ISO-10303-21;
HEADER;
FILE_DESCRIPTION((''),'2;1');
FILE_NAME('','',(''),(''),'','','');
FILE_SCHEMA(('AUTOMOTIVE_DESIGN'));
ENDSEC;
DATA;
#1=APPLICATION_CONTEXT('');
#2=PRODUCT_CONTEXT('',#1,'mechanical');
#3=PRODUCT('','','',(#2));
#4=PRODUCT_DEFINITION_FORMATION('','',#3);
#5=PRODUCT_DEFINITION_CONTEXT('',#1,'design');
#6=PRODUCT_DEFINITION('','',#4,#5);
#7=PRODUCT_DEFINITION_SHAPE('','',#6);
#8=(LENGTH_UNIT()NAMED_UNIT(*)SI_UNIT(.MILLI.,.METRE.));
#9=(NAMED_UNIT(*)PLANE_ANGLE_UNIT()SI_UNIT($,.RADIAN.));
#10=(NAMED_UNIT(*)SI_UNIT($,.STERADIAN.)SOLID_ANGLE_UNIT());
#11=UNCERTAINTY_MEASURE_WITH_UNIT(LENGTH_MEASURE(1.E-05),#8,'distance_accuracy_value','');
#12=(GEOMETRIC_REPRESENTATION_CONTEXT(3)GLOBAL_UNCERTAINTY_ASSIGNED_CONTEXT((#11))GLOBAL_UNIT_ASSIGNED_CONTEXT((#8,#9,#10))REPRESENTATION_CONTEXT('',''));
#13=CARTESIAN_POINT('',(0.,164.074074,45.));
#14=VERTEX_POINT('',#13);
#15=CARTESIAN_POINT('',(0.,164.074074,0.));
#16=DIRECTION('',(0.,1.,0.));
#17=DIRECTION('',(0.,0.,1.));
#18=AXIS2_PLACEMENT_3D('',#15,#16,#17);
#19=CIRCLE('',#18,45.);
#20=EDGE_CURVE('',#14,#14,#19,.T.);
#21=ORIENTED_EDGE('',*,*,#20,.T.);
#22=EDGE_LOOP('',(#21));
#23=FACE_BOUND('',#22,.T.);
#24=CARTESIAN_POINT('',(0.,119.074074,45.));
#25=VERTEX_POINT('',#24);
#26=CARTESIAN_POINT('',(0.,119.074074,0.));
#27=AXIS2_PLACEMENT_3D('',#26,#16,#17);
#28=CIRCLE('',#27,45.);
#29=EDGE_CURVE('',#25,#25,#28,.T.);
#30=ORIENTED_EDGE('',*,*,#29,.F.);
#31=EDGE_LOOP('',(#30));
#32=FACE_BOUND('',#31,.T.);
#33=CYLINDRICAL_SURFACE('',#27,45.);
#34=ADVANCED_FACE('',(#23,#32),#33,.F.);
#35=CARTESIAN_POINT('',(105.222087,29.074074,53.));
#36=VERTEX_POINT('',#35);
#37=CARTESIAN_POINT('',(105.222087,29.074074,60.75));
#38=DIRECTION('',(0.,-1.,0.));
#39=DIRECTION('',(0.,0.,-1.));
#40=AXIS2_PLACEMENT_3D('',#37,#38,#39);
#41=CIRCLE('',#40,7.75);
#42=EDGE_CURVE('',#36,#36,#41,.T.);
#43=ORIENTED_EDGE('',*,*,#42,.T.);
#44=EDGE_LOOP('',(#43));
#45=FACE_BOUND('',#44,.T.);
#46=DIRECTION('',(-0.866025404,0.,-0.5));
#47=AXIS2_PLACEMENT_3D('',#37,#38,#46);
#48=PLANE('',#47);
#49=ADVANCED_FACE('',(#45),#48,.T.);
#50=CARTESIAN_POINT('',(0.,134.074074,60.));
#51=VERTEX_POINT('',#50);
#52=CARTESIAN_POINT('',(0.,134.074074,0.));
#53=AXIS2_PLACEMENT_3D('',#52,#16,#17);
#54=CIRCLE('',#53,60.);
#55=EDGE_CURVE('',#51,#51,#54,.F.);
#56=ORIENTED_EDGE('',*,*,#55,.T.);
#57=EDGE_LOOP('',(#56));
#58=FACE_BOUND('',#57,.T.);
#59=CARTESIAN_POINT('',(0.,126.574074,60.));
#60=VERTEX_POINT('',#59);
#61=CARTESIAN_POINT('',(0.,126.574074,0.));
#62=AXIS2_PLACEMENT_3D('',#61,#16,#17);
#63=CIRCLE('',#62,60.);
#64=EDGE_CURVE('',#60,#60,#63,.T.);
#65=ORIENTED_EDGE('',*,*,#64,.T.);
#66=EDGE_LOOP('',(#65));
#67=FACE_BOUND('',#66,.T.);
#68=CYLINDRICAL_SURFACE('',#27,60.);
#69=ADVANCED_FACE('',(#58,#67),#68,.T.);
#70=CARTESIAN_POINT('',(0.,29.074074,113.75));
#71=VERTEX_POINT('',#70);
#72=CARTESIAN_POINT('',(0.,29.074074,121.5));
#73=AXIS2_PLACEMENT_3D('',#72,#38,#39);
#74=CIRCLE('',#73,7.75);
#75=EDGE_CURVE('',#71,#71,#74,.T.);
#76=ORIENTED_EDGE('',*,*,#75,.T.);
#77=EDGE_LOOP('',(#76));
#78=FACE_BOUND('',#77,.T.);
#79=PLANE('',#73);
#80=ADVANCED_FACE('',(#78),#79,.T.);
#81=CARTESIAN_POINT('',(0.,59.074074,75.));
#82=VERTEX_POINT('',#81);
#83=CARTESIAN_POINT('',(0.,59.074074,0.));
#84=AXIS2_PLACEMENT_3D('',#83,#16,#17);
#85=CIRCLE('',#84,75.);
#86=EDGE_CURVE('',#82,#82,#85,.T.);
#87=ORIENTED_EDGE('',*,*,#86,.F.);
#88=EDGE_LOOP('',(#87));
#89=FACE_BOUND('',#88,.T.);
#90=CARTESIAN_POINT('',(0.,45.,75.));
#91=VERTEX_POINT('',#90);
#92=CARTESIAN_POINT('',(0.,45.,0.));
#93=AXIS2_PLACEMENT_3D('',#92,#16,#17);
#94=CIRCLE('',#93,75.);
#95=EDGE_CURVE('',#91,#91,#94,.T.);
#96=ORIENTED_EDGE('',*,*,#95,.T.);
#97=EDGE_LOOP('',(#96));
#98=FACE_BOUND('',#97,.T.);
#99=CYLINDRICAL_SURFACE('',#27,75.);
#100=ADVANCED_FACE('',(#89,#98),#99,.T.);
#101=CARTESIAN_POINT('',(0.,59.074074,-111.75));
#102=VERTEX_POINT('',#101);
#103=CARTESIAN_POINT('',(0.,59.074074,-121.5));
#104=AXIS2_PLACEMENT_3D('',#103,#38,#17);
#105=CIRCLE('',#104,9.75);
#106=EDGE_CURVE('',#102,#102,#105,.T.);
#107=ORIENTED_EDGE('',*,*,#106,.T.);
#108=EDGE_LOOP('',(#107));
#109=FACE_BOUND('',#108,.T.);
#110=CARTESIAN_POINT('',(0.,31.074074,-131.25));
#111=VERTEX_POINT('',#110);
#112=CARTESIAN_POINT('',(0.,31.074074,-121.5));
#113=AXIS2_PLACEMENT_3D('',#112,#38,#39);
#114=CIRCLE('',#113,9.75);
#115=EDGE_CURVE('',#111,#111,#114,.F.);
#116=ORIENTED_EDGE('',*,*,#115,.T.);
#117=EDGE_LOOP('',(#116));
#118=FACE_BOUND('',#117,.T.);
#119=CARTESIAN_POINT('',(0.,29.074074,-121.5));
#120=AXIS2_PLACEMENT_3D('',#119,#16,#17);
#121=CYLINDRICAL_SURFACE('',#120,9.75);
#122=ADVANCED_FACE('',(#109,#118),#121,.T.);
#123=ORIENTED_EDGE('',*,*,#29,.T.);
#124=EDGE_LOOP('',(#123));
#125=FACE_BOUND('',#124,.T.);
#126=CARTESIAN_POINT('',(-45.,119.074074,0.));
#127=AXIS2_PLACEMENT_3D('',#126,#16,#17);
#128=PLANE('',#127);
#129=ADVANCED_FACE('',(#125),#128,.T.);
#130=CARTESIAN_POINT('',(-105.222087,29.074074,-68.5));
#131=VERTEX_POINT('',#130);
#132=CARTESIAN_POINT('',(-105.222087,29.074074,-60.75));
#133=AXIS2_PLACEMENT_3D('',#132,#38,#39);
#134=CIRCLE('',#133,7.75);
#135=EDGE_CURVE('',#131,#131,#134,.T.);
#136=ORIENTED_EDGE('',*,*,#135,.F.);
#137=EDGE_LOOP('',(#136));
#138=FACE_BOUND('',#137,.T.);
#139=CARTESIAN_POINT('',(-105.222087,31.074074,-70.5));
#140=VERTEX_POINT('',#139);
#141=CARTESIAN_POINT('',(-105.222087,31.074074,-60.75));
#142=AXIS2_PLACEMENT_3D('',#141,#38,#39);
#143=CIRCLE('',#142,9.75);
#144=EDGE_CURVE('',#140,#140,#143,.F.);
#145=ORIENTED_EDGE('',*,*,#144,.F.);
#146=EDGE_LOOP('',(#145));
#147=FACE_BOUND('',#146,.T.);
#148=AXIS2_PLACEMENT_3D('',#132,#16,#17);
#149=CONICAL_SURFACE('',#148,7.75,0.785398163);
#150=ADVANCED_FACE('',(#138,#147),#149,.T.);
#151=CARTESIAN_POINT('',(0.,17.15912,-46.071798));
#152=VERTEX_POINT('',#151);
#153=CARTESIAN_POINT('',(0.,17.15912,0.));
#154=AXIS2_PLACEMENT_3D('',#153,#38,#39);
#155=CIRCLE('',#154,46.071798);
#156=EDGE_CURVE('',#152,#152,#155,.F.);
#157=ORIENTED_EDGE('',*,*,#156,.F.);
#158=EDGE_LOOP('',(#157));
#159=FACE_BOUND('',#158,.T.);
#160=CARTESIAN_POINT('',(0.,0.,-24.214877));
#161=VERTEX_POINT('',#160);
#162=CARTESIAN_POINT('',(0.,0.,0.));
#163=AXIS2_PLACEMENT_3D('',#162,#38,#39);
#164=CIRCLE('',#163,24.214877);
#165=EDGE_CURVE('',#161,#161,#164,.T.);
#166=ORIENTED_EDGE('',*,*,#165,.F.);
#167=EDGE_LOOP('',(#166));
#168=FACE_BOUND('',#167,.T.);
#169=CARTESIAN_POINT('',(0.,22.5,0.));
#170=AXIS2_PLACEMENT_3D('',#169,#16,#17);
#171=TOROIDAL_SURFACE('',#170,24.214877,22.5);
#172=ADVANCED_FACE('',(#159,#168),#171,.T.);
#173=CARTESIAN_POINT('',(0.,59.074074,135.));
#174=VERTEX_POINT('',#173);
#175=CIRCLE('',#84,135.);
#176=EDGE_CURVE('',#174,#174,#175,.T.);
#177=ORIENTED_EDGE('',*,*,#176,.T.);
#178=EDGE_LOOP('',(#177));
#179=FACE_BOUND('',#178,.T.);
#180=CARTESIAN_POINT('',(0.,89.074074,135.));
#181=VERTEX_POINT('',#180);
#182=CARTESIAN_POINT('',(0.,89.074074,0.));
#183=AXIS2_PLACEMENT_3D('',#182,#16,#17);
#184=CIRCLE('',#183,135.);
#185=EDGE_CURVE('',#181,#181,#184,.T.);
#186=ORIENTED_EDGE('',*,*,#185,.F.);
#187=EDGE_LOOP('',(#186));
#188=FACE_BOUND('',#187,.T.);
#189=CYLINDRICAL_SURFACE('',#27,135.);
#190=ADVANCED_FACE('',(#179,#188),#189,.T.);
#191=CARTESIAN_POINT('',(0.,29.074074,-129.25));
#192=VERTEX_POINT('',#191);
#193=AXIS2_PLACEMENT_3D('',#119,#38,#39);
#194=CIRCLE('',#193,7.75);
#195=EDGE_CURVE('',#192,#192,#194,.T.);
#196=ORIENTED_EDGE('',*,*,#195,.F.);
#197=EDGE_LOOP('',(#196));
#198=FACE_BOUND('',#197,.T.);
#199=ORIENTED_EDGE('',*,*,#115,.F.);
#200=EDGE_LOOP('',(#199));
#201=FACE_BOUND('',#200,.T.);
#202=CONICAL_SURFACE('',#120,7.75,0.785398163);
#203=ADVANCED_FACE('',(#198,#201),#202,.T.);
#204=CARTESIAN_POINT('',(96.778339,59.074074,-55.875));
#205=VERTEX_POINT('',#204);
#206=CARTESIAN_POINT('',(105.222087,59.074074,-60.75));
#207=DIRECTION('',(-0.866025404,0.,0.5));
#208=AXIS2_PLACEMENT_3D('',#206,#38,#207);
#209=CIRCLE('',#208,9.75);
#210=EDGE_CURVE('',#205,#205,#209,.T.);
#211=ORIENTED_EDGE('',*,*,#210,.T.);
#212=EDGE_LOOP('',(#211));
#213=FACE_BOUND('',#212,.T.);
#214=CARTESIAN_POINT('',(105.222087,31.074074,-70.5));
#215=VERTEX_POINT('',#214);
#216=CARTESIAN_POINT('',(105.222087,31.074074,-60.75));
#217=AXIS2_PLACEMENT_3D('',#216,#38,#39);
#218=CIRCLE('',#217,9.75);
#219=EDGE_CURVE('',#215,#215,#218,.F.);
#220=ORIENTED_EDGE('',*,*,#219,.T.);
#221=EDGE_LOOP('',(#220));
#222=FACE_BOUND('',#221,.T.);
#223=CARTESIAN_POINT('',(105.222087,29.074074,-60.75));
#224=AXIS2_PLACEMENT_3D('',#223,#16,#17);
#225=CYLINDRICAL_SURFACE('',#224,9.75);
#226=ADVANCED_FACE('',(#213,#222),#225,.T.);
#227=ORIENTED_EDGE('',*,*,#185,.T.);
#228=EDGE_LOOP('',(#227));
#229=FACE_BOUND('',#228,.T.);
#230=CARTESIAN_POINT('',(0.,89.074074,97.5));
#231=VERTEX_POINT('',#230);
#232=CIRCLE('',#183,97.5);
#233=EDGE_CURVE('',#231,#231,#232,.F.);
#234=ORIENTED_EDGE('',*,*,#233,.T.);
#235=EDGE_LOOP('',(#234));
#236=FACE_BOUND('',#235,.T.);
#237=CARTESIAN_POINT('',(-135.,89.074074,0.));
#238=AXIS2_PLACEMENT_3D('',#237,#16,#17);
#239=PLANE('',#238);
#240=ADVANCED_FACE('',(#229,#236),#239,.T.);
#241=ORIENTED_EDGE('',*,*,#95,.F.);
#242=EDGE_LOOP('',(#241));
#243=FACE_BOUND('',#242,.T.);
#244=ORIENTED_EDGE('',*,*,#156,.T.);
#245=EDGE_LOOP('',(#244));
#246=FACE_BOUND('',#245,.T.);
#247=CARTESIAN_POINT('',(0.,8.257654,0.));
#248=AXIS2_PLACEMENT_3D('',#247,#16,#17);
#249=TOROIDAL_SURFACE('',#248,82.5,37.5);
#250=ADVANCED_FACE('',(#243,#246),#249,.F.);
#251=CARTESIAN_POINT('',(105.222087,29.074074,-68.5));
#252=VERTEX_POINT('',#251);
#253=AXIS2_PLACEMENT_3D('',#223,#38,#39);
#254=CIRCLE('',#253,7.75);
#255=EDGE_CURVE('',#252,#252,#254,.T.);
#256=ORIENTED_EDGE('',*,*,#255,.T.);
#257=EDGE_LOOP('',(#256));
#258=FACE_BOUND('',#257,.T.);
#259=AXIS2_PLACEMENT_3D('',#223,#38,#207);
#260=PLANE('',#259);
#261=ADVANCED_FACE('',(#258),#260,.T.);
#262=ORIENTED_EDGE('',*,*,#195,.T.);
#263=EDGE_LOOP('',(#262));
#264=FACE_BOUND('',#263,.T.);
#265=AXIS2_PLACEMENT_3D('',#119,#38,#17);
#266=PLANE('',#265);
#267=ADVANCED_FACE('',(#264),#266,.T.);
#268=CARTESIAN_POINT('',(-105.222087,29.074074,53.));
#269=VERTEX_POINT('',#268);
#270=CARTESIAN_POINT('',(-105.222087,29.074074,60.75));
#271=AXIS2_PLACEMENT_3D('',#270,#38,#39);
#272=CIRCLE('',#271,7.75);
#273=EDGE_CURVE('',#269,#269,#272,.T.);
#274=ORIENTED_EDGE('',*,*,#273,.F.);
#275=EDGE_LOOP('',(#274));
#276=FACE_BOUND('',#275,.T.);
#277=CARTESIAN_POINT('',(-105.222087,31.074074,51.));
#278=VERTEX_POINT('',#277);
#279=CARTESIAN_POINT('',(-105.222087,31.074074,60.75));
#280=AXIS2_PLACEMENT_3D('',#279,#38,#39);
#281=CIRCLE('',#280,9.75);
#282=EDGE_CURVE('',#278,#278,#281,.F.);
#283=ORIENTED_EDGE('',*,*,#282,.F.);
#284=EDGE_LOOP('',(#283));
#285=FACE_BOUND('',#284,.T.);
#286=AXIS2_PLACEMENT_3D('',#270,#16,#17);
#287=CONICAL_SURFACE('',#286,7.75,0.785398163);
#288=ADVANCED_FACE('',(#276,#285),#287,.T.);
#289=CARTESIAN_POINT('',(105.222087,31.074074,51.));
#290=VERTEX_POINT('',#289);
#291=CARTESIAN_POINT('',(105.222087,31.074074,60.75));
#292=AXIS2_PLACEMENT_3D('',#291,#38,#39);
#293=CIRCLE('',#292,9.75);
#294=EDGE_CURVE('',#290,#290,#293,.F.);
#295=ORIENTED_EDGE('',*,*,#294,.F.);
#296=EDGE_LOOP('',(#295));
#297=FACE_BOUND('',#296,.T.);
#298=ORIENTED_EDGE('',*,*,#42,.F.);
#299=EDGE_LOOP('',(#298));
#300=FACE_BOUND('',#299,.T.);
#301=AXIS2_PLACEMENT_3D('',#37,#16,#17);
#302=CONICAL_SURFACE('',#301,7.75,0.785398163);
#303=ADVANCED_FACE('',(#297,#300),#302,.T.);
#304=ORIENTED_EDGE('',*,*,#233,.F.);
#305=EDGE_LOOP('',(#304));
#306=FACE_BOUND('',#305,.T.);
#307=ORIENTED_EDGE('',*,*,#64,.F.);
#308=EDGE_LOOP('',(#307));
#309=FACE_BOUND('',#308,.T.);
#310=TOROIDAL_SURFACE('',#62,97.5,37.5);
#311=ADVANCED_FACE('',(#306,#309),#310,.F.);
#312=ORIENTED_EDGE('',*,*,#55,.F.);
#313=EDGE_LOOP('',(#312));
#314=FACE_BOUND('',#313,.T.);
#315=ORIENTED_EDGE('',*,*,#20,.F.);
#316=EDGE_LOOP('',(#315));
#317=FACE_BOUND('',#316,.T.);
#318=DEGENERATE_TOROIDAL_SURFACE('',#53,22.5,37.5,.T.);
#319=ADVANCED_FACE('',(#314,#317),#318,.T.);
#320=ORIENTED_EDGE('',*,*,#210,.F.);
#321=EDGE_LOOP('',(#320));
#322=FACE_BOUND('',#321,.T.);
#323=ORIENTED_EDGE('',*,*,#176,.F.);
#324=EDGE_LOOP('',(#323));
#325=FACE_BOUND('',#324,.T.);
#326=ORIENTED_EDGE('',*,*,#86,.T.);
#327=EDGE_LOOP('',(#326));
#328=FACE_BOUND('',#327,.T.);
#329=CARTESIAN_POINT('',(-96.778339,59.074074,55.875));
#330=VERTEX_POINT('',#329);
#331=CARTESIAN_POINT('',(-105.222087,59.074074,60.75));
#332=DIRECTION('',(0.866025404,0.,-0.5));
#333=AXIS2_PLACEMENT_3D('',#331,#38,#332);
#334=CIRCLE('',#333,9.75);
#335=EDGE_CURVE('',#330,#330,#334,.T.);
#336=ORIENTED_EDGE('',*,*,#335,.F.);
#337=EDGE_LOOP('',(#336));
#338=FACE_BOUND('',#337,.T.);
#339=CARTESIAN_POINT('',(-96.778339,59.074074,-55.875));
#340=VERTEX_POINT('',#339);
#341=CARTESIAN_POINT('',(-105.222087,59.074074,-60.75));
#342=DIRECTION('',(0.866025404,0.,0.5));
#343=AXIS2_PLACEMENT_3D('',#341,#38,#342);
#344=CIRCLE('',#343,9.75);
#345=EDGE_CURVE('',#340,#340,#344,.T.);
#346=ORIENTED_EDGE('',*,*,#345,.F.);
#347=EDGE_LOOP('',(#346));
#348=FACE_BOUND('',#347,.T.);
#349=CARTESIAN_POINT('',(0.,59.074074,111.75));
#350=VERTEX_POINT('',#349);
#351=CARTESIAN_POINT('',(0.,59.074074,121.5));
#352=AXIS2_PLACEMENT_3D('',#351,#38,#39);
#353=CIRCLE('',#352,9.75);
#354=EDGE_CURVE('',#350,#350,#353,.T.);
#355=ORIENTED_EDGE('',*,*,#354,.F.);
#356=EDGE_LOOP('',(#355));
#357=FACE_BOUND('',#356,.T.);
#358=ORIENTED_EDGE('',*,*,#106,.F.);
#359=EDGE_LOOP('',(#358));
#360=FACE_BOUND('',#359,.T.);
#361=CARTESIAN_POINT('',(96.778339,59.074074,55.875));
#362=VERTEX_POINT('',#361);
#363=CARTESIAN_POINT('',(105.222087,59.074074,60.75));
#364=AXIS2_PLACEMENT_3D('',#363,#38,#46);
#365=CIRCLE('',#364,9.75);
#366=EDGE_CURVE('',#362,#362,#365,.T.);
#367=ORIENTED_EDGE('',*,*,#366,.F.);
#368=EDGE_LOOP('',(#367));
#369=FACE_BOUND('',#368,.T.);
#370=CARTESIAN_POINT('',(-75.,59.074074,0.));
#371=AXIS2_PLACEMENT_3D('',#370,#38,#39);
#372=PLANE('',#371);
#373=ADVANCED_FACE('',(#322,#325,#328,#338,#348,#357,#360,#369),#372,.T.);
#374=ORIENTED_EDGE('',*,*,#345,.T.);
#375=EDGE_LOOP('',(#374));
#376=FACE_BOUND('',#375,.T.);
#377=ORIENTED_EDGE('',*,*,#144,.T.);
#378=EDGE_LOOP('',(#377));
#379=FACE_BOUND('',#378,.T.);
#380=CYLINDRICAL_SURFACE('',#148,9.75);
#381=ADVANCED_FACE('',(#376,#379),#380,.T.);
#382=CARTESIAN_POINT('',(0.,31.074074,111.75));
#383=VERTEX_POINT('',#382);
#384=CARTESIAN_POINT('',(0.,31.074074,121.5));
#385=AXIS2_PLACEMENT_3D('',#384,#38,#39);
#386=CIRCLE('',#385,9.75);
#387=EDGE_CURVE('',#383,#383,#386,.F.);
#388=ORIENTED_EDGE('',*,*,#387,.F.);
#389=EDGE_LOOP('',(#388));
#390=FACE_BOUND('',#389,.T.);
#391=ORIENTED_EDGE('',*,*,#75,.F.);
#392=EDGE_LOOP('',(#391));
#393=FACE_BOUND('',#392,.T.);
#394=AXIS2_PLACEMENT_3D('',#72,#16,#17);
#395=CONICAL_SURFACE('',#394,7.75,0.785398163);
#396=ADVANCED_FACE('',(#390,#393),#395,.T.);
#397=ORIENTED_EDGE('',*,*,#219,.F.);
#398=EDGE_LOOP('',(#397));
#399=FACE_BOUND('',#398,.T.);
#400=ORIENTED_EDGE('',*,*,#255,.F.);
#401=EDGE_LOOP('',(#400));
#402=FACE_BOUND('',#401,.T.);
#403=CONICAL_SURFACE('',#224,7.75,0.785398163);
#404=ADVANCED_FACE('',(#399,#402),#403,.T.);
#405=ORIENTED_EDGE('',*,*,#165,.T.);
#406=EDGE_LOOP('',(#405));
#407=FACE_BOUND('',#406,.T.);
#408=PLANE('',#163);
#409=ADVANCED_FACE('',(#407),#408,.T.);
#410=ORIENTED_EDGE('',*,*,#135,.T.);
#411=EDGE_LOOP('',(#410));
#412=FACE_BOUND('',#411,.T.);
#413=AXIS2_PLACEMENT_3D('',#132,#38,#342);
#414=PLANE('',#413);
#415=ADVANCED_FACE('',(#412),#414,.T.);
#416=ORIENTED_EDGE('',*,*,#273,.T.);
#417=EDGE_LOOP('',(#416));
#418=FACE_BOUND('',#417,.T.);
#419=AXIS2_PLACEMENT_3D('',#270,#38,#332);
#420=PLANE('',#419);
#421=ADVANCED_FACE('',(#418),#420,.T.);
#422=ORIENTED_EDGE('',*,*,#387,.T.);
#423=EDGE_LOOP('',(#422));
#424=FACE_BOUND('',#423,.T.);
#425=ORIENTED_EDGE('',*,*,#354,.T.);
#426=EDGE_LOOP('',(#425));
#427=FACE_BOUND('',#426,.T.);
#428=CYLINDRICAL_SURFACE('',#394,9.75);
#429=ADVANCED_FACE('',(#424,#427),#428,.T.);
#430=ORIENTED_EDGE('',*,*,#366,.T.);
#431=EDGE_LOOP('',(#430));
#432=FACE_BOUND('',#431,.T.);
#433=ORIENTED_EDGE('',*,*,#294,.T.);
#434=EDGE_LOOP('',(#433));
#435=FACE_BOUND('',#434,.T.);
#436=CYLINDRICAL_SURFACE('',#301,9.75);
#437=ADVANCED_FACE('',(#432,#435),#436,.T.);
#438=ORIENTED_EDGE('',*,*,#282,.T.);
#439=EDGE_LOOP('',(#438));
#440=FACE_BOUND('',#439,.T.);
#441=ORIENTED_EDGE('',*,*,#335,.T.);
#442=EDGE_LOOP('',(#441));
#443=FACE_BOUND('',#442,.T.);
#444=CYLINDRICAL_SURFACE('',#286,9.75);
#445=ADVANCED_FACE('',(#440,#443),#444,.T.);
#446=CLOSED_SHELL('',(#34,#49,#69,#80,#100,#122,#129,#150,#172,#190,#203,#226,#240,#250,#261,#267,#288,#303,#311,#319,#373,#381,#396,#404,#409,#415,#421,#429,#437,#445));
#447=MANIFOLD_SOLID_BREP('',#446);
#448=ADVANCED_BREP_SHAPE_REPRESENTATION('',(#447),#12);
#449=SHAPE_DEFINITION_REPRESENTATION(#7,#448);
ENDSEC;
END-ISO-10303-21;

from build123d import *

# Parameters (mm, degrees)
FILLET1_R                    = 37.5
FILLET6_R                    = 37.5
FILLET8_R                    = 22.5
SKETCH4_R                    = 9.749999999999996
BOSS_EXTRUDE2_DEPTH          = 30
CHAMFER1_SIZE                = 2
CIRPATTERN4_COUNT            = 6
CHAMFER1_OF_CIRPATTERN4_SIZE = 2


with BuildPart() as part:
    # Sketch1 → Revolve1 (revolve)
    with BuildSketch(Plane.XY, mode=Mode.PRIVATE) as revolve1_sk:
        Polygon((0, 0), (-45, 0), (-45, 44.99999999999999), (-75.00000000000001, 44.999999999999986), (-75.00000000000001, 59.07407407407406), (-135, 59.074074074074055), (-135, 89.07407407407406), (-60, 89.07407407407405), (-60, 164.07407407407405), (-45.00000000000001, 164.07407407407405), (-45, 119.07407407407403), (0, 119.07407407407403), align=None)
    revolve(revolve1_sk.sketch.rotate(Axis((0, 119.07407407407403, 0), (0, -1, 0)), 270), axis=Axis((0, 119.07407407407403, 0), (0, -1, 0)))

    # Fillet1
    # the kernel refuses this fillet: 37.5 mm, written as the material it adds along each edge
    with BuildSketch(Plane(origin=(0, 89.07407407407405, 0), x_dir=(2.2e-16, 0, 1), z_dir=(1, 0, -2.2e-16))) as fillet1_piece_1:
        with BuildLine():
            CenterArc((60 + FILLET1_R, -FILLET1_R), FILLET1_R, 90, 89.99999999999997)
            Line((60, -FILLET1_R), (60, 0))
            Line((60, 0), (60 + FILLET1_R, -1.421e-14))
        make_face()
    revolve(axis=Axis((0, 89.07407407407405, 0), (0, -1, 0)))
    # the kernel refuses this fillet: 37.5 mm, written as the material it takes off along each edge
    with BuildSketch(Plane(origin=(0, 164.07407407407405, 0), x_dir=(2.2e-16, 0, 1), z_dir=(1, 0, -2.2e-16))) as fillet1_2_piece_1:
        with BuildLine():
            CenterArc((22.5, 30), FILLET1_R, 306.86989764584405, 53.13010235415595)
            Line((45.00000000000001, 0), (60, 0))
            Line((60, 0), (60, 30))
        make_face()
    revolve(axis=Axis((0, 164.07407407407405, 0), (0, -1, 0)), mode=Mode.SUBTRACT)

    # Fillet6
    # the kernel refuses this fillet: 37.5 mm, written as the material it adds along each edge
    with BuildSketch(Plane(origin=(0, 44.999999999999986, 0), x_dir=(2.2e-16, 0, 1), z_dir=(1, 0, -2.2e-16))) as fillet6_piece_1:
        with BuildLine():
            CenterArc((82.5, 36.742346141747674), FILLET6_R, 180, 78.4630409671845)
            Line((45, 36.742346141747674), (44.25, 36.742346141747674))
            Line((44.25, 36.742346141747674), (44.25, 0))
            Line((44.25, 0), (45, -0.75))
            ThreePointArc((45, -0.75), (60.00000000000001, -0.75), (74.85000000000001, -0.7348469228349543))
            Line((74.85000000000001, -0.7348469228349543), (75.00000000000001, 0))
        make_face()
    revolve(axis=Axis((0, 44.999999999999986, 0), (0, -1, 0)))

    # Fillet8
    fillet8_edges = [part.edges().sort_by_distance(p)[0] for p in [
        (-1.55e-14, 0, -45),
    ]]
    fillet(fillet8_edges, radius=FILLET8_R)

    # Sketch4 → Boss-Extrude2 (add)
    with BuildSketch(Plane.XZ.offset(-59.074074074074055)):
        with Locations(Location((0, 121.5, 0), (0, 0, 270))):
            Circle(SKETCH4_R)
    boss_extrude2 = extrude(amount=BOSS_EXTRUDE2_DEPTH)

    # Chamfer1
    chamfer1_edges = [part.edges().sort_by_distance(p)[0] for p in [
        (2.99e-15, 29.074074074074055, 131.25),
    ]]
    chamfer(chamfer1_edges, length=CHAMFER1_SIZE)

    # CirPattern4: Boss-Extrude2 ×6 about axis
    cirpattern4_axis = Axis((1.4387e-13, 0, -3.74e-15), (0, 1, 0))
    for i in range(1, CIRPATTERN4_COUNT):
        add(boss_extrude2.rotate(cirpattern4_axis, i * 360 / CIRPATTERN4_COUNT))

    # Chamfer1 of CirPattern4
    chamfer1_of_cirpattern4_edges = [part.edges().sort_by_distance(p)[0] for p in [
        (113.66583424670763, 29.074074074074055, 65.62500000000014),
        (113.66583424670779, 29.074074074074055, -65.62499999999986),
        (3.0083e-13, 29.074074074074055, -131.25),
        (-113.66583424670732, 29.074074074074055, -65.62500000000018),
        (-113.66583424670749, 29.074074074074055, 65.62499999999989),
    ]]
    chamfer(chamfer1_of_cirpattern4_edges, length=CHAMFER1_OF_CIRPATTERN4_SIZE)


solid = part.part
